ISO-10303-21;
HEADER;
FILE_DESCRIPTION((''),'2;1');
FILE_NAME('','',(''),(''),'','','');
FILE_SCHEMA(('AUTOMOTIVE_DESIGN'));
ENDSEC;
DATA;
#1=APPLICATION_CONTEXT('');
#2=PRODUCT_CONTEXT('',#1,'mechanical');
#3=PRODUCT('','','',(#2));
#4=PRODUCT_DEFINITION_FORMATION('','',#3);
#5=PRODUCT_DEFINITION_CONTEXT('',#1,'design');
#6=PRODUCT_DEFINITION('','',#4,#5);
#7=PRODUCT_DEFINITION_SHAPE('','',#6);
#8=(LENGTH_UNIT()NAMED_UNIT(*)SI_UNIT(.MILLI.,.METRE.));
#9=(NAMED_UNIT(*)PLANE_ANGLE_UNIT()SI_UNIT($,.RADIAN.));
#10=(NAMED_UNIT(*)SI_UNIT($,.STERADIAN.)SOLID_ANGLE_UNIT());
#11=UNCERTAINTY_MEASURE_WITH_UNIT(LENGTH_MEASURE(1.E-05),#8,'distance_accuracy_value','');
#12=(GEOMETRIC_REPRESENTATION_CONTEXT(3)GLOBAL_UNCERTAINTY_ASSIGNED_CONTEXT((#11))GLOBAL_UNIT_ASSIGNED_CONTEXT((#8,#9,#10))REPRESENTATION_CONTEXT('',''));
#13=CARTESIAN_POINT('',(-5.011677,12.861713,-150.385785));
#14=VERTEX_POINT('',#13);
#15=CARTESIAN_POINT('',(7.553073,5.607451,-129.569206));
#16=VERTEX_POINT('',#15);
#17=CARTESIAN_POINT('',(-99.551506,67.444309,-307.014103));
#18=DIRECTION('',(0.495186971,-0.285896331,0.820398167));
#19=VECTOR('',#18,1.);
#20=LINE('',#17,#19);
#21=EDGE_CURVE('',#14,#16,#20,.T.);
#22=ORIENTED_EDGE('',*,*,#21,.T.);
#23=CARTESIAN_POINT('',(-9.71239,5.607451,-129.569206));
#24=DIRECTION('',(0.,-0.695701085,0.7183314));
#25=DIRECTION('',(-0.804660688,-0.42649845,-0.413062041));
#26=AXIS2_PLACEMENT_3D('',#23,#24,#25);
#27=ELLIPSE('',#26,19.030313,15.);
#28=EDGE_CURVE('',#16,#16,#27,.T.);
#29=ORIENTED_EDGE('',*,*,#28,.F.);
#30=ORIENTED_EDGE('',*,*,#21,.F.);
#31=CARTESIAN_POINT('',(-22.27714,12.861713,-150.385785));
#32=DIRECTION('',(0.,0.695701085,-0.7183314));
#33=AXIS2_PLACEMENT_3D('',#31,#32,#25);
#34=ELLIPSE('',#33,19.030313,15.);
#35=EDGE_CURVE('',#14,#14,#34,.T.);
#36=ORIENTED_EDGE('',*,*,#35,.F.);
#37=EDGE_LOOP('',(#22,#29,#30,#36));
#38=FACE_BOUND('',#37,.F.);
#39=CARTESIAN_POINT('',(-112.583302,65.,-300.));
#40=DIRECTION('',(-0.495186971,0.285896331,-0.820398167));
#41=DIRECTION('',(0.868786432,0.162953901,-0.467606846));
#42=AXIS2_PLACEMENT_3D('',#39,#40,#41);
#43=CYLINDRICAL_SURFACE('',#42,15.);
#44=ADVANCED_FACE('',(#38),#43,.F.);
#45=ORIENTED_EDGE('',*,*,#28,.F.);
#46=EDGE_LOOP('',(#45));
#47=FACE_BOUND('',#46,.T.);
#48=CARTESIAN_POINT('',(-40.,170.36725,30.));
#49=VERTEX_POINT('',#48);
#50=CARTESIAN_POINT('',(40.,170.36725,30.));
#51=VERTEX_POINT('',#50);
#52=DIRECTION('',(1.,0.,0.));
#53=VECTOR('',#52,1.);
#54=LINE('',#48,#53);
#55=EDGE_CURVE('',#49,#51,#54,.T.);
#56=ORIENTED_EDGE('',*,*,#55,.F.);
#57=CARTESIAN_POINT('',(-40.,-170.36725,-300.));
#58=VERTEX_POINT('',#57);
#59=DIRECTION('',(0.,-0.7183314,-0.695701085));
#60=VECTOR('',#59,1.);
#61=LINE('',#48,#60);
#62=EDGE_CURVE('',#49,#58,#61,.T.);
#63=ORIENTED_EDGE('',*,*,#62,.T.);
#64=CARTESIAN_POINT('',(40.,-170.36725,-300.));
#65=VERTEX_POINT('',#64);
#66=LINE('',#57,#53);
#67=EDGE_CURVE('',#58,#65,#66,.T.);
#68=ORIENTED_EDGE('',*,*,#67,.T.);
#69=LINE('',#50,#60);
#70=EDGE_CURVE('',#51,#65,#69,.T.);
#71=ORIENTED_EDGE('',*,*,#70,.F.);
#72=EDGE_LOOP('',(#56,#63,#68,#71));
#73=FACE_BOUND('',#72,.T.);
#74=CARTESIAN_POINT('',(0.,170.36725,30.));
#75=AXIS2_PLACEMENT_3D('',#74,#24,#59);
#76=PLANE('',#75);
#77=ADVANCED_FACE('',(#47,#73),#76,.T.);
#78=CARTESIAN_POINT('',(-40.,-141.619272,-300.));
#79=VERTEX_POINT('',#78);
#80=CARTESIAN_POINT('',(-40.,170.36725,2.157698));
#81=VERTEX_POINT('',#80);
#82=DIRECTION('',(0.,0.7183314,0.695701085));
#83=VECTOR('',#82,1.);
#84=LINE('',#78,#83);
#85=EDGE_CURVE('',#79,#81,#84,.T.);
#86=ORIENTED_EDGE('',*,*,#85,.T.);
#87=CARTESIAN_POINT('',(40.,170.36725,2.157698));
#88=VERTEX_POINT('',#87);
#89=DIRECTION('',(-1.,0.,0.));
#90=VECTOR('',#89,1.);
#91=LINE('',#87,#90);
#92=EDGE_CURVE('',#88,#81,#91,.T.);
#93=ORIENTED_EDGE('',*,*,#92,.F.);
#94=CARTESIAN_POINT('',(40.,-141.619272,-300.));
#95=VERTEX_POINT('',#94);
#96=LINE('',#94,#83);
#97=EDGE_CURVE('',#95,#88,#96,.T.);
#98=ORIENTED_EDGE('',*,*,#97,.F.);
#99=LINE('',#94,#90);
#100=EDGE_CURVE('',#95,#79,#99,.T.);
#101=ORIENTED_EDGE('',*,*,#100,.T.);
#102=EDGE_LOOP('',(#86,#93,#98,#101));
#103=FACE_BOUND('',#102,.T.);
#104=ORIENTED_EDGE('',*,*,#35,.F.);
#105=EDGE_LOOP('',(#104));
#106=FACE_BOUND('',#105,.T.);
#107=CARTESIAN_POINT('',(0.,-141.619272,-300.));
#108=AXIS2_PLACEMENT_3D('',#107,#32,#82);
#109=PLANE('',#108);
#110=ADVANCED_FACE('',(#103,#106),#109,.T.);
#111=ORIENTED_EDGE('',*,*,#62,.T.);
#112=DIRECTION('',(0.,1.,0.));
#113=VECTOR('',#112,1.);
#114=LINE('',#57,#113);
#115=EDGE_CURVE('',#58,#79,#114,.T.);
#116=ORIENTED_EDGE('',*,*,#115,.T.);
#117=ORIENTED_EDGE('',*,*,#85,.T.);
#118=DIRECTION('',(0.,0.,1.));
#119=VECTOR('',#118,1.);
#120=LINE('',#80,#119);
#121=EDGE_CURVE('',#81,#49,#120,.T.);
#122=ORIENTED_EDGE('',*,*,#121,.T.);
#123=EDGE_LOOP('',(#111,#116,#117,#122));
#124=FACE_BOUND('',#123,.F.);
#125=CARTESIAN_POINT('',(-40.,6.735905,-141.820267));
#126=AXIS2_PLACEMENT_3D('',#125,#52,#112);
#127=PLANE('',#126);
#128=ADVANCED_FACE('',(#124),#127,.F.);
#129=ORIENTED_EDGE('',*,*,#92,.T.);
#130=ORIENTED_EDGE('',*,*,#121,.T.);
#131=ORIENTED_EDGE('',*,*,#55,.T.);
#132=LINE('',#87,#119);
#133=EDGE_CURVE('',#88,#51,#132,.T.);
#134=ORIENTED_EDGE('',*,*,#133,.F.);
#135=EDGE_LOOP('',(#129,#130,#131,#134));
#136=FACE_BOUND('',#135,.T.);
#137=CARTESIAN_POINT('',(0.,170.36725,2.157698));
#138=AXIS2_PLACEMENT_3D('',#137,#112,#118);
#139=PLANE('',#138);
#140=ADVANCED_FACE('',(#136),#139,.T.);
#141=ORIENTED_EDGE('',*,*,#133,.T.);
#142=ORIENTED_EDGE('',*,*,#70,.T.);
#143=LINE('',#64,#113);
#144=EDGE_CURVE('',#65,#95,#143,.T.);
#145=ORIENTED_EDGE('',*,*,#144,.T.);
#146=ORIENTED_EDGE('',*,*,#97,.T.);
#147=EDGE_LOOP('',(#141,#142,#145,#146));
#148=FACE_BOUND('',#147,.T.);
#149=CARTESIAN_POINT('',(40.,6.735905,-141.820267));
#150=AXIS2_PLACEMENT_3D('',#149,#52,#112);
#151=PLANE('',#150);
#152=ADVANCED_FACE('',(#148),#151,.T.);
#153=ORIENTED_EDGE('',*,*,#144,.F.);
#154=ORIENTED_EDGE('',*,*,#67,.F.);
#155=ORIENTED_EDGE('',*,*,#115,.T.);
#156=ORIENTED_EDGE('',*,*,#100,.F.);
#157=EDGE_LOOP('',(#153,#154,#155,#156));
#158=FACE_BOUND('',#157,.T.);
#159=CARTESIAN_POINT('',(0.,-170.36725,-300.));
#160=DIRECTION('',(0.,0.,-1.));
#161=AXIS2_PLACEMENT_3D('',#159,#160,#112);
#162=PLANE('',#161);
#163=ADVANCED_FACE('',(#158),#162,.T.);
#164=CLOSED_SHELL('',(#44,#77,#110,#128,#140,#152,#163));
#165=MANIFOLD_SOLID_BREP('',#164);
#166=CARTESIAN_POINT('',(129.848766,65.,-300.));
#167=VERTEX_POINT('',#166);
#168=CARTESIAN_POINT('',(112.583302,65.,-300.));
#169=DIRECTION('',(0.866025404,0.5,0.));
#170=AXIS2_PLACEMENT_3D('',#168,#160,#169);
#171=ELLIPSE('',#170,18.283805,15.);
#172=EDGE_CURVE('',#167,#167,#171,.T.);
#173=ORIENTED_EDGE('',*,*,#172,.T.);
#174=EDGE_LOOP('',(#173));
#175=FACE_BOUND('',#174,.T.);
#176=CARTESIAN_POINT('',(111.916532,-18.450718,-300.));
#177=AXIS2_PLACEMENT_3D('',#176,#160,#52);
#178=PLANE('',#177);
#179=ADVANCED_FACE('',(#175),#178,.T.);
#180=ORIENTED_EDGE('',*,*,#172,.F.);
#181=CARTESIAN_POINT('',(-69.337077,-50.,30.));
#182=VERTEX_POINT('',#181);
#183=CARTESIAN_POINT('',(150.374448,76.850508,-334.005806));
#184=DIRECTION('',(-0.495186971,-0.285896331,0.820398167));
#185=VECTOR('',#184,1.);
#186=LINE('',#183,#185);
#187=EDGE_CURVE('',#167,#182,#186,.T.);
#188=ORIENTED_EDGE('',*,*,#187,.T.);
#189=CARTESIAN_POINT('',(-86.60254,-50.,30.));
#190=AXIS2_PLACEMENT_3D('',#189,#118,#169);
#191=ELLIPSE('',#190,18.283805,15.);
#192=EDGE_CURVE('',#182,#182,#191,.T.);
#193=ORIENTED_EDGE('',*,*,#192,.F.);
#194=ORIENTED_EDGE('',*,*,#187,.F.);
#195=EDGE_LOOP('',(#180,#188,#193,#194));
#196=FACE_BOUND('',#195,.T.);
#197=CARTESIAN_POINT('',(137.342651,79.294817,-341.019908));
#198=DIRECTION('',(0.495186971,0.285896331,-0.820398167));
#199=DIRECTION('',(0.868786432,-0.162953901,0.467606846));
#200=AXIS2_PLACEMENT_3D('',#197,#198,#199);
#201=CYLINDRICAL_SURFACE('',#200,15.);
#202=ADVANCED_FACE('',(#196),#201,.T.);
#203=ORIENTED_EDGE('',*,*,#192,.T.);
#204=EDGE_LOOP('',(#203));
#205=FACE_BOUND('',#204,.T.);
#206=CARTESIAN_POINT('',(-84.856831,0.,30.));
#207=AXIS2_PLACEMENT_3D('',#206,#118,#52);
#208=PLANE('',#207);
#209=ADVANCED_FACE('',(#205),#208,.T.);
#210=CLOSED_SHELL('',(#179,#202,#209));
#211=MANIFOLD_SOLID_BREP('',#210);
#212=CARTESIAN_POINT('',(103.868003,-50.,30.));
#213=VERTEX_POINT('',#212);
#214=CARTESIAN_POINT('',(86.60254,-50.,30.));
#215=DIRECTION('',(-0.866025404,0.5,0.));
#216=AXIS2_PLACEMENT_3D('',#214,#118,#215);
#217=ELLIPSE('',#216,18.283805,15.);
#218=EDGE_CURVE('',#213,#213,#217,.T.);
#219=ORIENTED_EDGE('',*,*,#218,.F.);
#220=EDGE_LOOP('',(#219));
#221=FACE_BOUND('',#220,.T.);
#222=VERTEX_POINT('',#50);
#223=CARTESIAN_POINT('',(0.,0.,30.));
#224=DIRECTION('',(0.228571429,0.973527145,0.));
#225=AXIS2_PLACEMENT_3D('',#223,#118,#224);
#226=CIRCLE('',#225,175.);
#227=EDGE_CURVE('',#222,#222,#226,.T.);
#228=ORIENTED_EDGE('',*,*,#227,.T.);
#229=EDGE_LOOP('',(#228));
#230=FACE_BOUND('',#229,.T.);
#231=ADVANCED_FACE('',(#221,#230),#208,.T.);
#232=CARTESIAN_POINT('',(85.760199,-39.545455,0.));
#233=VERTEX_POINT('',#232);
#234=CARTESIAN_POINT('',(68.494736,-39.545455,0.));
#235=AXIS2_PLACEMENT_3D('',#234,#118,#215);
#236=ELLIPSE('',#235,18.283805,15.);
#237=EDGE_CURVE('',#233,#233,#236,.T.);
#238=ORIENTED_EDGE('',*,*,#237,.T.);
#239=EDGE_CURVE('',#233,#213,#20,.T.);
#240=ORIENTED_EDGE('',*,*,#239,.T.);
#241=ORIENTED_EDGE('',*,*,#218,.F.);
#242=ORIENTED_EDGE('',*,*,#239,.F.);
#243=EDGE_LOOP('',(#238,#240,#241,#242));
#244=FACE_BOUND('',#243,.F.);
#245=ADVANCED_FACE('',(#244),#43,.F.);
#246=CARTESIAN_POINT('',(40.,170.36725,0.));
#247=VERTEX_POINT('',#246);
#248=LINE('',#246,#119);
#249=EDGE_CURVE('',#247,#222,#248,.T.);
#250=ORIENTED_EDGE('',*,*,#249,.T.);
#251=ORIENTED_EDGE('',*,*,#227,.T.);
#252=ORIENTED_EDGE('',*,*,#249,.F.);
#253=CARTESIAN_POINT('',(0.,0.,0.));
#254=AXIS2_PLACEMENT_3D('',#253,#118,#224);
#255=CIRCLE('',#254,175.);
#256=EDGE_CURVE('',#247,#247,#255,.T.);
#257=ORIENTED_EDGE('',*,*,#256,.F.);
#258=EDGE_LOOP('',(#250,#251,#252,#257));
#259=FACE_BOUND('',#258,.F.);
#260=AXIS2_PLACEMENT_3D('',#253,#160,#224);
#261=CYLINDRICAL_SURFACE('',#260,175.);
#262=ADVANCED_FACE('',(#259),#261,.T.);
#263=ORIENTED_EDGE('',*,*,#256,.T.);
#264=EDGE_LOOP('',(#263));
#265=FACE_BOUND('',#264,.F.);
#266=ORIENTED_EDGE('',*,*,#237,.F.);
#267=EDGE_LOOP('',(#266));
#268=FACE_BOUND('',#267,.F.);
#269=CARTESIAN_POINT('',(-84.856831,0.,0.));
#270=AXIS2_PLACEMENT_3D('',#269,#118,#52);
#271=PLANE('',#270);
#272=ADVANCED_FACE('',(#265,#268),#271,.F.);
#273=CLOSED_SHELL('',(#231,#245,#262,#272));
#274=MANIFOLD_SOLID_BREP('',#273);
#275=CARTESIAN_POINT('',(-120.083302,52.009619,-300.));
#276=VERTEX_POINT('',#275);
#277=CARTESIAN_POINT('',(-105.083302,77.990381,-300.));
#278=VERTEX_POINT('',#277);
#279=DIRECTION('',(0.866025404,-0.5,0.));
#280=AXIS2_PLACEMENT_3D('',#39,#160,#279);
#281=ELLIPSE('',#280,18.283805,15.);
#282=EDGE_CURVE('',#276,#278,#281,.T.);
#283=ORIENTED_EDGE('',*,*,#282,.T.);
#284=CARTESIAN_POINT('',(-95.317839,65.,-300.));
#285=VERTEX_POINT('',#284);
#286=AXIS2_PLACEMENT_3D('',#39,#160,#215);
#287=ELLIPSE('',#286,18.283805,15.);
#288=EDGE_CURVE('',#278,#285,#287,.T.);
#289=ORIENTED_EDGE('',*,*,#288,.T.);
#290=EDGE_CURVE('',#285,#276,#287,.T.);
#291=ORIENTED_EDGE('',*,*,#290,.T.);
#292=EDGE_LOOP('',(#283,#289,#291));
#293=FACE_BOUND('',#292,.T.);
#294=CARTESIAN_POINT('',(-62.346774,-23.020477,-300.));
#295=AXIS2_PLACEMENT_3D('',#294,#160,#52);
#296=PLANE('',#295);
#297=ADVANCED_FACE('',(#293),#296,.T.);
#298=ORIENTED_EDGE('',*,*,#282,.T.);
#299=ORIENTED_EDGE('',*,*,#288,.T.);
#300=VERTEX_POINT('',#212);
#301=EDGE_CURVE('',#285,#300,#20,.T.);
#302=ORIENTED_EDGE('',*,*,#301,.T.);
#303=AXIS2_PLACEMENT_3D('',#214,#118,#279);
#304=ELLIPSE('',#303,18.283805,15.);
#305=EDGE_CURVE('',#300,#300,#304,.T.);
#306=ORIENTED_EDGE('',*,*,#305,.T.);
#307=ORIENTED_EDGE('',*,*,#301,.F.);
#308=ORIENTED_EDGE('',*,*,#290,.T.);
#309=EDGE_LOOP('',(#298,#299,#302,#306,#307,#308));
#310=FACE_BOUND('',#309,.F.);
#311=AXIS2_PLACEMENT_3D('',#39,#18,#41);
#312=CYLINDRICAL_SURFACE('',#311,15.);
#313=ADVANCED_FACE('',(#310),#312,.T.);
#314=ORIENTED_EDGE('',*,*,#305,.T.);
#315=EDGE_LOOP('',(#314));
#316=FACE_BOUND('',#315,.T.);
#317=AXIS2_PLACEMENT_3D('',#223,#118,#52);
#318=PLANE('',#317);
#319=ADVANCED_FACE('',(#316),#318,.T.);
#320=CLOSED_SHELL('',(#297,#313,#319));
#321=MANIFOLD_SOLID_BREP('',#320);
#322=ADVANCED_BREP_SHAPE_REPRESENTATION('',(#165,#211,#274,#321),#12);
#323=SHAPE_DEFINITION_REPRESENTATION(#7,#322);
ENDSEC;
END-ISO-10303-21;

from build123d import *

# Parameters (mm, degrees)
F0_W           = 80
F0_H           = 300.734500748
F0_H_2         = 20
F1_DEPTH       = 30
F4_DEPTH       = 40
F8_R           = 15
F9_DEPTH       = 481.7550188272
F10_DEPTH      = 481.7550188272
F11_DEPTH      = 481.7550188272
F11_DEPTH_BACK = 50
F13_DEPTH      = 49.5977982638
F14_W          = 425
F14_H          = 300
F15_DEPTH      = 73.8088242034
F20_R          = 15
F21_REACH      = 574.1814256984
F23_DEPTH      = 49.5977982638


with BuildPart() as f1:
    # F0 (on Top) → F1 (new body)
    with BuildSketch(Plane.XY):
        with BuildLine():
            Line((-40, 150.367250374), (-40, 170.367250374))
            ThreePointArc((-40, 170.367250374), (-175, 0), (-40, -170.367250374))
            Line((-40, -170.367250374), (-40, -150.367250374))
            Line((-40, -150.367250374), (-40, 150.367250374))
        make_face()
        Rectangle(F0_W, F0_H)
        with Locations((0, 160.367250374)):
            Rectangle(F0_W, F0_H_2)
        with BuildLine():
            Line((-40, 170.367250374), (40, 170.367250374))
            ThreePointArc((40, 170.367250374), (0, 175), (-40, 170.367250374))
        make_face()
        with BuildLine():
            ThreePointArc((40, -170.367250374), (137.1586672435, -108.6853255964), (175, 0))
            ThreePointArc((175, 0), (137.1586672435, 108.6853255964), (40, 170.367250374))
            Line((40, 170.367250374), (40, 150.367250374))
            Line((40, 150.367250374), (40, -150.367250374))
            Line((40, -150.367250374), (40, -170.367250374))
        make_face()
        with Locations((0, -160.367250374)):
            Rectangle(F0_W, F0_H_2)
        with BuildLine():
            ThreePointArc((-40, -170.367250374), (0, -175), (40, -170.367250374))
            Line((40, -170.367250374), (-40, -170.367250374))
        make_face()
    extrude(amount=F1_DEPTH)


with BuildPart() as f4:
    # F3 (on Right) → F4 (new body, symmetric)
    with BuildSketch(Plane.YZ):
        Polygon((170.367250374, 2.1576976805), (170.367250374, 30), (-170.367250374, -300), (-141.6192716452, -300), align=None)
    extrude(amount=F4_DEPTH, both=True)


with BuildPart() as f9_tool:
    # F8 (on line) → F9 (new body, through all)
    with BuildSketch(Plane(origin=(-158.6839007787, 91.6161928307, -262.8986402967), x_dir=(0.8687864318, 0.1629539008, -0.4676068457), z_dir=(-0.4951869707, 0.2858963308, -0.8203981668))):
        with Locations((53.0632116259, 37.3429156197)):
            Circle(F8_R)
    extrude(amount=-F9_DEPTH)


with BuildPart() as f1_1:
    add(f1.part)

    # F9: cut by f9_tool
    add(f9_tool.part, mode=Mode.SUBTRACT)

    # F8 (on line) → F10 (cut, through all)
    with BuildSketch(Plane(origin=(-158.6839007787, 91.6161928307, -262.8986402967), x_dir=(0.8687864318, 0.1629539008, -0.4676068457), z_dir=(-0.4951869707, 0.2858963308, -0.8203981668))):
        with Locations((53.0632116259, 37.3429156197)):
            Circle(F8_R)
    extrude(amount=-F10_DEPTH, mode=Mode.SUBTRACT)


with BuildPart() as f4_1:
    add(f4.part)

    # F9: cut by f9_tool
    add(f9_tool.part, mode=Mode.SUBTRACT)


with BuildPart() as f11:
    # F8 (on line) → F11 (new body, two sides)
    with BuildSketch(Plane(origin=(-158.6839007787, 91.6161928307, -262.8986402967), x_dir=(0.8687864318, 0.1629539008, -0.4676068457), z_dir=(-0.4951869707, 0.2858963308, -0.8203981668))) as f11_sk:
        with Locations((53.0632116259, 37.3429156197)):
            Circle(F8_R)
    extrude(amount=-F11_DEPTH)
    extrude(f11_sk.sketch, amount=F11_DEPTH_BACK)

    # F12 (on face) → F13 (cut, through all)
    with BuildSketch(Plane(origin=(0, 0, -300), x_dir=(1, 0, 0), z_dir=(0, 0, -1))):
        Polygon((-40, 141.6192716452), (-40, 170.367250374), (-160, 170.367250374), (-160, -119.632749626), (40, -119.632749626), (40, 141.6192716452), align=None)
    extrude(amount=F13_DEPTH, mode=Mode.SUBTRACT)

    # F14 (on face) → F15 (cut, through all)
    with BuildSketch(Plane.XY.offset(30)):
        Rectangle(F14_W, F14_H)
    extrude(amount=F15_DEPTH, mode=Mode.SUBTRACT)


with BuildPart() as f21:
    f21_end = f1_1.part.faces().sort_by_distance((-0.7825626972, 0.4518127839, 30))[0]
    # F20 (on line) → F21 (new body, up to a face of F1 that its end follows)
    with BuildSketch(Plane(origin=(183.4432493147, 105.9110093729, -303.9185486352), x_dir=(0.8687864318, -0.1629539008, 0.4676068457), z_dir=(0.4951869707, 0.2858963308, -0.8203981668))):
        with Locations((-53.0632116259, 37.3429156197)):
            Circle(F20_R)
    f21_long = extrude(amount=-F21_REACH, mode=Mode.PRIVATE)
    add(split(f21_long, bisect_by=f21_end, keep=Keep.BOTTOM, mode=Mode.PRIVATE))

    # F22 (on face) → F23 (cut, through all)
    with BuildSketch(Plane(origin=(0, 0, -300), x_dir=(1, 0, 0), z_dir=(0, 0, -1))):
        Polygon((260, 170.367250374), (40, 170.367250374), (40, 141.6192716452), (-40, 141.6192716452), (-40, -129.632749626), (260, -129.632749626), align=None)
    extrude(amount=F23_DEPTH, mode=Mode.SUBTRACT)


solid = Compound([f1_1.part, f4_1.part, f11.part, f21.part])
